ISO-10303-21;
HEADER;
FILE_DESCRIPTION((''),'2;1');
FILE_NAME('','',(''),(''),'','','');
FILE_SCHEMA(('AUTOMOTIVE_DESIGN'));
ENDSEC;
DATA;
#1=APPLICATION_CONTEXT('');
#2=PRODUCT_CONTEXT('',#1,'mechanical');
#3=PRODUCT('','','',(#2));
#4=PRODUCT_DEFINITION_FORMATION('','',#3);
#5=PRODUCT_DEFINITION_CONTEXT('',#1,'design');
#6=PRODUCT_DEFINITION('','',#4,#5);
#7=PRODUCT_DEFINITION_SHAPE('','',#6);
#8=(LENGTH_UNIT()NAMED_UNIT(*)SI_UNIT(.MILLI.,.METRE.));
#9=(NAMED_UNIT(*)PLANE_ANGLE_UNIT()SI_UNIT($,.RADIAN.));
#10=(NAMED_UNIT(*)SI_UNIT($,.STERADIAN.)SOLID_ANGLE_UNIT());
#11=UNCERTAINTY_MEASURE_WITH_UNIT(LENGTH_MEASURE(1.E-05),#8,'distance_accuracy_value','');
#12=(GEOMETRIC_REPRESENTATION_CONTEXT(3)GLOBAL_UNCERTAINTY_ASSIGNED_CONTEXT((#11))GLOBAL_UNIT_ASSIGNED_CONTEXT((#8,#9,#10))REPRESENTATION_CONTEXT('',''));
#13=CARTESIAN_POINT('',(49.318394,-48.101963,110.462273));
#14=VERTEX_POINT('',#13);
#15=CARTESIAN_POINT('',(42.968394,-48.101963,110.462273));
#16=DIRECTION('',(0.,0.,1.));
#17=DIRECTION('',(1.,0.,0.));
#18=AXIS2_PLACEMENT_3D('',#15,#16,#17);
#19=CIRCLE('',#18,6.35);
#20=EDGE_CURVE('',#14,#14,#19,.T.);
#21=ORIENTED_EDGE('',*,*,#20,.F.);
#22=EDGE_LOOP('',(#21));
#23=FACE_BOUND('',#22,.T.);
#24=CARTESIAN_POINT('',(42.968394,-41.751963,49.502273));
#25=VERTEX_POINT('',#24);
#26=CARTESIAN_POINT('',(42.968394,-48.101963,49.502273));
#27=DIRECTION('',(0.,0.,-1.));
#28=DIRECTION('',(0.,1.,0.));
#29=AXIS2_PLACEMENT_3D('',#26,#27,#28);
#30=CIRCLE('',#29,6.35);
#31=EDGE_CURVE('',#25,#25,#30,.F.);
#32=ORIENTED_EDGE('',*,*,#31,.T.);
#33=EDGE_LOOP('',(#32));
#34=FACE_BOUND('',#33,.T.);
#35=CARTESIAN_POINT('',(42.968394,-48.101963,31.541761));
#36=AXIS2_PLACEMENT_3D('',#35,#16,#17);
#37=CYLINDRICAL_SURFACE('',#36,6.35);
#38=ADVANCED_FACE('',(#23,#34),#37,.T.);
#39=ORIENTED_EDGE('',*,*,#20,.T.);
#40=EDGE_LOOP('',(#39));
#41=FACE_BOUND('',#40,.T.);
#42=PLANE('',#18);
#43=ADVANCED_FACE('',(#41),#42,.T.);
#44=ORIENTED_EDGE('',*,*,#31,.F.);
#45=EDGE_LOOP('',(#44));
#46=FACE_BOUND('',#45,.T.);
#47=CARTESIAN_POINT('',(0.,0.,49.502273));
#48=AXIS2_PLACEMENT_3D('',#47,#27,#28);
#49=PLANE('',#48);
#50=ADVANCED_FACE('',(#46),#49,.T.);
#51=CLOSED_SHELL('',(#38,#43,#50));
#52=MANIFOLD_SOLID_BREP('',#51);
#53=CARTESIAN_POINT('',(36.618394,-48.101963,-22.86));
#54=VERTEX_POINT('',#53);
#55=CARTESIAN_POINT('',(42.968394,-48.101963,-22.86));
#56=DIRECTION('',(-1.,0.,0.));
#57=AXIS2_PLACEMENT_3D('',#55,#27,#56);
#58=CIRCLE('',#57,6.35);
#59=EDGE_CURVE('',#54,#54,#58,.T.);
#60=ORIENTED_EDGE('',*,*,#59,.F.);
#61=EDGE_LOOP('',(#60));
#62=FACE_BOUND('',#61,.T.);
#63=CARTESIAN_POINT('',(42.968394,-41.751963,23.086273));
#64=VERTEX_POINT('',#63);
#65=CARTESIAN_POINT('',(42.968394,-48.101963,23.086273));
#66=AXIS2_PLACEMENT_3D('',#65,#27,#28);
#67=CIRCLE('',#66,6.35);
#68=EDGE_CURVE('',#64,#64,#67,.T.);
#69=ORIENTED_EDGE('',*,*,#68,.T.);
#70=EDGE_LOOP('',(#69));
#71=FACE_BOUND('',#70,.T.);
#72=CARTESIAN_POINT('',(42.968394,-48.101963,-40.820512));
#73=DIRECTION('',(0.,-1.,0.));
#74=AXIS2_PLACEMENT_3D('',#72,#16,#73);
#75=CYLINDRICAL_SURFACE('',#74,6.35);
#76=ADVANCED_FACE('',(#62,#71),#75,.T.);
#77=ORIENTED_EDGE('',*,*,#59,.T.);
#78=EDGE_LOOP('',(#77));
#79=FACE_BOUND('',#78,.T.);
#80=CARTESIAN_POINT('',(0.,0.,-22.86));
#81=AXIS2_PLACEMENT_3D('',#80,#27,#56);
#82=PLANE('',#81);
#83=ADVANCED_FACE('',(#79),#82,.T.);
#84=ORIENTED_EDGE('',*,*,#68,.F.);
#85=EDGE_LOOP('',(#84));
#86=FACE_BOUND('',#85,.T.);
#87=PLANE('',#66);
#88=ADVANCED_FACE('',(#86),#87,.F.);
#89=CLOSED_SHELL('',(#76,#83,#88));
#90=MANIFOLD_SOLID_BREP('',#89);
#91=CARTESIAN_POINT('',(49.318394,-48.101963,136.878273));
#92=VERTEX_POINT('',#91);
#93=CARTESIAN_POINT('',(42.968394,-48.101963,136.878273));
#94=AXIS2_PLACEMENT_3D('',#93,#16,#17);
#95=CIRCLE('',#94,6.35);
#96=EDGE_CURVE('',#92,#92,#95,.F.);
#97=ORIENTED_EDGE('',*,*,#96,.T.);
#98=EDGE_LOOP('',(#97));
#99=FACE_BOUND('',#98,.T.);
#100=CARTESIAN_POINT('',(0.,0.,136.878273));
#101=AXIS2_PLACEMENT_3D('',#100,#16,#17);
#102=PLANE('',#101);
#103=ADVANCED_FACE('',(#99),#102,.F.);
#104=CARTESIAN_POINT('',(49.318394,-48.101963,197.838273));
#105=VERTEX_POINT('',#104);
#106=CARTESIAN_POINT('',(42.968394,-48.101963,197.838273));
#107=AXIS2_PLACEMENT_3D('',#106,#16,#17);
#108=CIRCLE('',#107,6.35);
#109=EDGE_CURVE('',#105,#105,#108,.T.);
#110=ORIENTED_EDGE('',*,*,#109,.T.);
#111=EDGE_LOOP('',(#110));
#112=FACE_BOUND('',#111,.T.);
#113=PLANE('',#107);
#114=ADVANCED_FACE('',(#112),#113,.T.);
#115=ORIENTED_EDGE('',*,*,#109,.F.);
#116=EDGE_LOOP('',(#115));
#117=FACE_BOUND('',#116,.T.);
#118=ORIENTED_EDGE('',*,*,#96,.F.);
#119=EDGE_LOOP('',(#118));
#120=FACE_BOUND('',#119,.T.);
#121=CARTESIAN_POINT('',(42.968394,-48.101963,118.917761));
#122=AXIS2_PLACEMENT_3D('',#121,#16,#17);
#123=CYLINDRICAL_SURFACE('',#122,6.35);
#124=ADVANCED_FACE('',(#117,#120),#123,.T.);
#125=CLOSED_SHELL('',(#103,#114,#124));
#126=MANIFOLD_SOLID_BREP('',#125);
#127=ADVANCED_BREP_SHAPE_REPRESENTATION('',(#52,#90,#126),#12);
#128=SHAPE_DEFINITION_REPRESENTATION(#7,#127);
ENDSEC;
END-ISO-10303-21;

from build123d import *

# Parameters (mm, degrees)
BOSS_EXTRUDE1_START     = -60.96
BOSS_EXTRUDE1_OUTLINE_R = 6.35
BOSS_EXTRUDE1_DEPTH     = 60.96
SKETCH3_R               = 6.35
BOSS_EXTRUDE2_DEPTH     = 60.96
SKETCH4_R               = 6.35
BOSS_EXTRUDE3_DEPTH     = 45.946272956


# Read off the part's stored shape, not the designer's step: Boss-Extrude1
with BuildPart() as part:
    # Boss-Extrude1 outline → Boss-Extrude1 (new body)
    with BuildSketch(Plane.XY.offset(197.838272956).offset(BOSS_EXTRUDE1_START)):
        with Locations((42.968393667, -48.101963299)):
            Circle(BOSS_EXTRUDE1_OUTLINE_R)
    extrude(amount=BOSS_EXTRUDE1_DEPTH)


with BuildPart() as body_2:
    # Sketch3 → Boss-Extrude2 (new body)
    with BuildSketch(Plane.XY.offset(110.462272956)):
        with Locations((42.968393667, -48.101963299)):
            Circle(SKETCH3_R)
    extrude(amount=-BOSS_EXTRUDE2_DEPTH)


with BuildPart() as body_3:
    # Sketch4 → Boss-Extrude3 (new body)
    with BuildSketch(Plane(origin=(0, 0, 23.086272956), x_dir=(-1, 0, 0), z_dir=(0, 0, -1))):
        with Locations((-42.968393667, -48.101963299)):
            Circle(SKETCH4_R)
    extrude(amount=BOSS_EXTRUDE3_DEPTH)


solid = Compound([part.part, body_2.part, body_3.part])
